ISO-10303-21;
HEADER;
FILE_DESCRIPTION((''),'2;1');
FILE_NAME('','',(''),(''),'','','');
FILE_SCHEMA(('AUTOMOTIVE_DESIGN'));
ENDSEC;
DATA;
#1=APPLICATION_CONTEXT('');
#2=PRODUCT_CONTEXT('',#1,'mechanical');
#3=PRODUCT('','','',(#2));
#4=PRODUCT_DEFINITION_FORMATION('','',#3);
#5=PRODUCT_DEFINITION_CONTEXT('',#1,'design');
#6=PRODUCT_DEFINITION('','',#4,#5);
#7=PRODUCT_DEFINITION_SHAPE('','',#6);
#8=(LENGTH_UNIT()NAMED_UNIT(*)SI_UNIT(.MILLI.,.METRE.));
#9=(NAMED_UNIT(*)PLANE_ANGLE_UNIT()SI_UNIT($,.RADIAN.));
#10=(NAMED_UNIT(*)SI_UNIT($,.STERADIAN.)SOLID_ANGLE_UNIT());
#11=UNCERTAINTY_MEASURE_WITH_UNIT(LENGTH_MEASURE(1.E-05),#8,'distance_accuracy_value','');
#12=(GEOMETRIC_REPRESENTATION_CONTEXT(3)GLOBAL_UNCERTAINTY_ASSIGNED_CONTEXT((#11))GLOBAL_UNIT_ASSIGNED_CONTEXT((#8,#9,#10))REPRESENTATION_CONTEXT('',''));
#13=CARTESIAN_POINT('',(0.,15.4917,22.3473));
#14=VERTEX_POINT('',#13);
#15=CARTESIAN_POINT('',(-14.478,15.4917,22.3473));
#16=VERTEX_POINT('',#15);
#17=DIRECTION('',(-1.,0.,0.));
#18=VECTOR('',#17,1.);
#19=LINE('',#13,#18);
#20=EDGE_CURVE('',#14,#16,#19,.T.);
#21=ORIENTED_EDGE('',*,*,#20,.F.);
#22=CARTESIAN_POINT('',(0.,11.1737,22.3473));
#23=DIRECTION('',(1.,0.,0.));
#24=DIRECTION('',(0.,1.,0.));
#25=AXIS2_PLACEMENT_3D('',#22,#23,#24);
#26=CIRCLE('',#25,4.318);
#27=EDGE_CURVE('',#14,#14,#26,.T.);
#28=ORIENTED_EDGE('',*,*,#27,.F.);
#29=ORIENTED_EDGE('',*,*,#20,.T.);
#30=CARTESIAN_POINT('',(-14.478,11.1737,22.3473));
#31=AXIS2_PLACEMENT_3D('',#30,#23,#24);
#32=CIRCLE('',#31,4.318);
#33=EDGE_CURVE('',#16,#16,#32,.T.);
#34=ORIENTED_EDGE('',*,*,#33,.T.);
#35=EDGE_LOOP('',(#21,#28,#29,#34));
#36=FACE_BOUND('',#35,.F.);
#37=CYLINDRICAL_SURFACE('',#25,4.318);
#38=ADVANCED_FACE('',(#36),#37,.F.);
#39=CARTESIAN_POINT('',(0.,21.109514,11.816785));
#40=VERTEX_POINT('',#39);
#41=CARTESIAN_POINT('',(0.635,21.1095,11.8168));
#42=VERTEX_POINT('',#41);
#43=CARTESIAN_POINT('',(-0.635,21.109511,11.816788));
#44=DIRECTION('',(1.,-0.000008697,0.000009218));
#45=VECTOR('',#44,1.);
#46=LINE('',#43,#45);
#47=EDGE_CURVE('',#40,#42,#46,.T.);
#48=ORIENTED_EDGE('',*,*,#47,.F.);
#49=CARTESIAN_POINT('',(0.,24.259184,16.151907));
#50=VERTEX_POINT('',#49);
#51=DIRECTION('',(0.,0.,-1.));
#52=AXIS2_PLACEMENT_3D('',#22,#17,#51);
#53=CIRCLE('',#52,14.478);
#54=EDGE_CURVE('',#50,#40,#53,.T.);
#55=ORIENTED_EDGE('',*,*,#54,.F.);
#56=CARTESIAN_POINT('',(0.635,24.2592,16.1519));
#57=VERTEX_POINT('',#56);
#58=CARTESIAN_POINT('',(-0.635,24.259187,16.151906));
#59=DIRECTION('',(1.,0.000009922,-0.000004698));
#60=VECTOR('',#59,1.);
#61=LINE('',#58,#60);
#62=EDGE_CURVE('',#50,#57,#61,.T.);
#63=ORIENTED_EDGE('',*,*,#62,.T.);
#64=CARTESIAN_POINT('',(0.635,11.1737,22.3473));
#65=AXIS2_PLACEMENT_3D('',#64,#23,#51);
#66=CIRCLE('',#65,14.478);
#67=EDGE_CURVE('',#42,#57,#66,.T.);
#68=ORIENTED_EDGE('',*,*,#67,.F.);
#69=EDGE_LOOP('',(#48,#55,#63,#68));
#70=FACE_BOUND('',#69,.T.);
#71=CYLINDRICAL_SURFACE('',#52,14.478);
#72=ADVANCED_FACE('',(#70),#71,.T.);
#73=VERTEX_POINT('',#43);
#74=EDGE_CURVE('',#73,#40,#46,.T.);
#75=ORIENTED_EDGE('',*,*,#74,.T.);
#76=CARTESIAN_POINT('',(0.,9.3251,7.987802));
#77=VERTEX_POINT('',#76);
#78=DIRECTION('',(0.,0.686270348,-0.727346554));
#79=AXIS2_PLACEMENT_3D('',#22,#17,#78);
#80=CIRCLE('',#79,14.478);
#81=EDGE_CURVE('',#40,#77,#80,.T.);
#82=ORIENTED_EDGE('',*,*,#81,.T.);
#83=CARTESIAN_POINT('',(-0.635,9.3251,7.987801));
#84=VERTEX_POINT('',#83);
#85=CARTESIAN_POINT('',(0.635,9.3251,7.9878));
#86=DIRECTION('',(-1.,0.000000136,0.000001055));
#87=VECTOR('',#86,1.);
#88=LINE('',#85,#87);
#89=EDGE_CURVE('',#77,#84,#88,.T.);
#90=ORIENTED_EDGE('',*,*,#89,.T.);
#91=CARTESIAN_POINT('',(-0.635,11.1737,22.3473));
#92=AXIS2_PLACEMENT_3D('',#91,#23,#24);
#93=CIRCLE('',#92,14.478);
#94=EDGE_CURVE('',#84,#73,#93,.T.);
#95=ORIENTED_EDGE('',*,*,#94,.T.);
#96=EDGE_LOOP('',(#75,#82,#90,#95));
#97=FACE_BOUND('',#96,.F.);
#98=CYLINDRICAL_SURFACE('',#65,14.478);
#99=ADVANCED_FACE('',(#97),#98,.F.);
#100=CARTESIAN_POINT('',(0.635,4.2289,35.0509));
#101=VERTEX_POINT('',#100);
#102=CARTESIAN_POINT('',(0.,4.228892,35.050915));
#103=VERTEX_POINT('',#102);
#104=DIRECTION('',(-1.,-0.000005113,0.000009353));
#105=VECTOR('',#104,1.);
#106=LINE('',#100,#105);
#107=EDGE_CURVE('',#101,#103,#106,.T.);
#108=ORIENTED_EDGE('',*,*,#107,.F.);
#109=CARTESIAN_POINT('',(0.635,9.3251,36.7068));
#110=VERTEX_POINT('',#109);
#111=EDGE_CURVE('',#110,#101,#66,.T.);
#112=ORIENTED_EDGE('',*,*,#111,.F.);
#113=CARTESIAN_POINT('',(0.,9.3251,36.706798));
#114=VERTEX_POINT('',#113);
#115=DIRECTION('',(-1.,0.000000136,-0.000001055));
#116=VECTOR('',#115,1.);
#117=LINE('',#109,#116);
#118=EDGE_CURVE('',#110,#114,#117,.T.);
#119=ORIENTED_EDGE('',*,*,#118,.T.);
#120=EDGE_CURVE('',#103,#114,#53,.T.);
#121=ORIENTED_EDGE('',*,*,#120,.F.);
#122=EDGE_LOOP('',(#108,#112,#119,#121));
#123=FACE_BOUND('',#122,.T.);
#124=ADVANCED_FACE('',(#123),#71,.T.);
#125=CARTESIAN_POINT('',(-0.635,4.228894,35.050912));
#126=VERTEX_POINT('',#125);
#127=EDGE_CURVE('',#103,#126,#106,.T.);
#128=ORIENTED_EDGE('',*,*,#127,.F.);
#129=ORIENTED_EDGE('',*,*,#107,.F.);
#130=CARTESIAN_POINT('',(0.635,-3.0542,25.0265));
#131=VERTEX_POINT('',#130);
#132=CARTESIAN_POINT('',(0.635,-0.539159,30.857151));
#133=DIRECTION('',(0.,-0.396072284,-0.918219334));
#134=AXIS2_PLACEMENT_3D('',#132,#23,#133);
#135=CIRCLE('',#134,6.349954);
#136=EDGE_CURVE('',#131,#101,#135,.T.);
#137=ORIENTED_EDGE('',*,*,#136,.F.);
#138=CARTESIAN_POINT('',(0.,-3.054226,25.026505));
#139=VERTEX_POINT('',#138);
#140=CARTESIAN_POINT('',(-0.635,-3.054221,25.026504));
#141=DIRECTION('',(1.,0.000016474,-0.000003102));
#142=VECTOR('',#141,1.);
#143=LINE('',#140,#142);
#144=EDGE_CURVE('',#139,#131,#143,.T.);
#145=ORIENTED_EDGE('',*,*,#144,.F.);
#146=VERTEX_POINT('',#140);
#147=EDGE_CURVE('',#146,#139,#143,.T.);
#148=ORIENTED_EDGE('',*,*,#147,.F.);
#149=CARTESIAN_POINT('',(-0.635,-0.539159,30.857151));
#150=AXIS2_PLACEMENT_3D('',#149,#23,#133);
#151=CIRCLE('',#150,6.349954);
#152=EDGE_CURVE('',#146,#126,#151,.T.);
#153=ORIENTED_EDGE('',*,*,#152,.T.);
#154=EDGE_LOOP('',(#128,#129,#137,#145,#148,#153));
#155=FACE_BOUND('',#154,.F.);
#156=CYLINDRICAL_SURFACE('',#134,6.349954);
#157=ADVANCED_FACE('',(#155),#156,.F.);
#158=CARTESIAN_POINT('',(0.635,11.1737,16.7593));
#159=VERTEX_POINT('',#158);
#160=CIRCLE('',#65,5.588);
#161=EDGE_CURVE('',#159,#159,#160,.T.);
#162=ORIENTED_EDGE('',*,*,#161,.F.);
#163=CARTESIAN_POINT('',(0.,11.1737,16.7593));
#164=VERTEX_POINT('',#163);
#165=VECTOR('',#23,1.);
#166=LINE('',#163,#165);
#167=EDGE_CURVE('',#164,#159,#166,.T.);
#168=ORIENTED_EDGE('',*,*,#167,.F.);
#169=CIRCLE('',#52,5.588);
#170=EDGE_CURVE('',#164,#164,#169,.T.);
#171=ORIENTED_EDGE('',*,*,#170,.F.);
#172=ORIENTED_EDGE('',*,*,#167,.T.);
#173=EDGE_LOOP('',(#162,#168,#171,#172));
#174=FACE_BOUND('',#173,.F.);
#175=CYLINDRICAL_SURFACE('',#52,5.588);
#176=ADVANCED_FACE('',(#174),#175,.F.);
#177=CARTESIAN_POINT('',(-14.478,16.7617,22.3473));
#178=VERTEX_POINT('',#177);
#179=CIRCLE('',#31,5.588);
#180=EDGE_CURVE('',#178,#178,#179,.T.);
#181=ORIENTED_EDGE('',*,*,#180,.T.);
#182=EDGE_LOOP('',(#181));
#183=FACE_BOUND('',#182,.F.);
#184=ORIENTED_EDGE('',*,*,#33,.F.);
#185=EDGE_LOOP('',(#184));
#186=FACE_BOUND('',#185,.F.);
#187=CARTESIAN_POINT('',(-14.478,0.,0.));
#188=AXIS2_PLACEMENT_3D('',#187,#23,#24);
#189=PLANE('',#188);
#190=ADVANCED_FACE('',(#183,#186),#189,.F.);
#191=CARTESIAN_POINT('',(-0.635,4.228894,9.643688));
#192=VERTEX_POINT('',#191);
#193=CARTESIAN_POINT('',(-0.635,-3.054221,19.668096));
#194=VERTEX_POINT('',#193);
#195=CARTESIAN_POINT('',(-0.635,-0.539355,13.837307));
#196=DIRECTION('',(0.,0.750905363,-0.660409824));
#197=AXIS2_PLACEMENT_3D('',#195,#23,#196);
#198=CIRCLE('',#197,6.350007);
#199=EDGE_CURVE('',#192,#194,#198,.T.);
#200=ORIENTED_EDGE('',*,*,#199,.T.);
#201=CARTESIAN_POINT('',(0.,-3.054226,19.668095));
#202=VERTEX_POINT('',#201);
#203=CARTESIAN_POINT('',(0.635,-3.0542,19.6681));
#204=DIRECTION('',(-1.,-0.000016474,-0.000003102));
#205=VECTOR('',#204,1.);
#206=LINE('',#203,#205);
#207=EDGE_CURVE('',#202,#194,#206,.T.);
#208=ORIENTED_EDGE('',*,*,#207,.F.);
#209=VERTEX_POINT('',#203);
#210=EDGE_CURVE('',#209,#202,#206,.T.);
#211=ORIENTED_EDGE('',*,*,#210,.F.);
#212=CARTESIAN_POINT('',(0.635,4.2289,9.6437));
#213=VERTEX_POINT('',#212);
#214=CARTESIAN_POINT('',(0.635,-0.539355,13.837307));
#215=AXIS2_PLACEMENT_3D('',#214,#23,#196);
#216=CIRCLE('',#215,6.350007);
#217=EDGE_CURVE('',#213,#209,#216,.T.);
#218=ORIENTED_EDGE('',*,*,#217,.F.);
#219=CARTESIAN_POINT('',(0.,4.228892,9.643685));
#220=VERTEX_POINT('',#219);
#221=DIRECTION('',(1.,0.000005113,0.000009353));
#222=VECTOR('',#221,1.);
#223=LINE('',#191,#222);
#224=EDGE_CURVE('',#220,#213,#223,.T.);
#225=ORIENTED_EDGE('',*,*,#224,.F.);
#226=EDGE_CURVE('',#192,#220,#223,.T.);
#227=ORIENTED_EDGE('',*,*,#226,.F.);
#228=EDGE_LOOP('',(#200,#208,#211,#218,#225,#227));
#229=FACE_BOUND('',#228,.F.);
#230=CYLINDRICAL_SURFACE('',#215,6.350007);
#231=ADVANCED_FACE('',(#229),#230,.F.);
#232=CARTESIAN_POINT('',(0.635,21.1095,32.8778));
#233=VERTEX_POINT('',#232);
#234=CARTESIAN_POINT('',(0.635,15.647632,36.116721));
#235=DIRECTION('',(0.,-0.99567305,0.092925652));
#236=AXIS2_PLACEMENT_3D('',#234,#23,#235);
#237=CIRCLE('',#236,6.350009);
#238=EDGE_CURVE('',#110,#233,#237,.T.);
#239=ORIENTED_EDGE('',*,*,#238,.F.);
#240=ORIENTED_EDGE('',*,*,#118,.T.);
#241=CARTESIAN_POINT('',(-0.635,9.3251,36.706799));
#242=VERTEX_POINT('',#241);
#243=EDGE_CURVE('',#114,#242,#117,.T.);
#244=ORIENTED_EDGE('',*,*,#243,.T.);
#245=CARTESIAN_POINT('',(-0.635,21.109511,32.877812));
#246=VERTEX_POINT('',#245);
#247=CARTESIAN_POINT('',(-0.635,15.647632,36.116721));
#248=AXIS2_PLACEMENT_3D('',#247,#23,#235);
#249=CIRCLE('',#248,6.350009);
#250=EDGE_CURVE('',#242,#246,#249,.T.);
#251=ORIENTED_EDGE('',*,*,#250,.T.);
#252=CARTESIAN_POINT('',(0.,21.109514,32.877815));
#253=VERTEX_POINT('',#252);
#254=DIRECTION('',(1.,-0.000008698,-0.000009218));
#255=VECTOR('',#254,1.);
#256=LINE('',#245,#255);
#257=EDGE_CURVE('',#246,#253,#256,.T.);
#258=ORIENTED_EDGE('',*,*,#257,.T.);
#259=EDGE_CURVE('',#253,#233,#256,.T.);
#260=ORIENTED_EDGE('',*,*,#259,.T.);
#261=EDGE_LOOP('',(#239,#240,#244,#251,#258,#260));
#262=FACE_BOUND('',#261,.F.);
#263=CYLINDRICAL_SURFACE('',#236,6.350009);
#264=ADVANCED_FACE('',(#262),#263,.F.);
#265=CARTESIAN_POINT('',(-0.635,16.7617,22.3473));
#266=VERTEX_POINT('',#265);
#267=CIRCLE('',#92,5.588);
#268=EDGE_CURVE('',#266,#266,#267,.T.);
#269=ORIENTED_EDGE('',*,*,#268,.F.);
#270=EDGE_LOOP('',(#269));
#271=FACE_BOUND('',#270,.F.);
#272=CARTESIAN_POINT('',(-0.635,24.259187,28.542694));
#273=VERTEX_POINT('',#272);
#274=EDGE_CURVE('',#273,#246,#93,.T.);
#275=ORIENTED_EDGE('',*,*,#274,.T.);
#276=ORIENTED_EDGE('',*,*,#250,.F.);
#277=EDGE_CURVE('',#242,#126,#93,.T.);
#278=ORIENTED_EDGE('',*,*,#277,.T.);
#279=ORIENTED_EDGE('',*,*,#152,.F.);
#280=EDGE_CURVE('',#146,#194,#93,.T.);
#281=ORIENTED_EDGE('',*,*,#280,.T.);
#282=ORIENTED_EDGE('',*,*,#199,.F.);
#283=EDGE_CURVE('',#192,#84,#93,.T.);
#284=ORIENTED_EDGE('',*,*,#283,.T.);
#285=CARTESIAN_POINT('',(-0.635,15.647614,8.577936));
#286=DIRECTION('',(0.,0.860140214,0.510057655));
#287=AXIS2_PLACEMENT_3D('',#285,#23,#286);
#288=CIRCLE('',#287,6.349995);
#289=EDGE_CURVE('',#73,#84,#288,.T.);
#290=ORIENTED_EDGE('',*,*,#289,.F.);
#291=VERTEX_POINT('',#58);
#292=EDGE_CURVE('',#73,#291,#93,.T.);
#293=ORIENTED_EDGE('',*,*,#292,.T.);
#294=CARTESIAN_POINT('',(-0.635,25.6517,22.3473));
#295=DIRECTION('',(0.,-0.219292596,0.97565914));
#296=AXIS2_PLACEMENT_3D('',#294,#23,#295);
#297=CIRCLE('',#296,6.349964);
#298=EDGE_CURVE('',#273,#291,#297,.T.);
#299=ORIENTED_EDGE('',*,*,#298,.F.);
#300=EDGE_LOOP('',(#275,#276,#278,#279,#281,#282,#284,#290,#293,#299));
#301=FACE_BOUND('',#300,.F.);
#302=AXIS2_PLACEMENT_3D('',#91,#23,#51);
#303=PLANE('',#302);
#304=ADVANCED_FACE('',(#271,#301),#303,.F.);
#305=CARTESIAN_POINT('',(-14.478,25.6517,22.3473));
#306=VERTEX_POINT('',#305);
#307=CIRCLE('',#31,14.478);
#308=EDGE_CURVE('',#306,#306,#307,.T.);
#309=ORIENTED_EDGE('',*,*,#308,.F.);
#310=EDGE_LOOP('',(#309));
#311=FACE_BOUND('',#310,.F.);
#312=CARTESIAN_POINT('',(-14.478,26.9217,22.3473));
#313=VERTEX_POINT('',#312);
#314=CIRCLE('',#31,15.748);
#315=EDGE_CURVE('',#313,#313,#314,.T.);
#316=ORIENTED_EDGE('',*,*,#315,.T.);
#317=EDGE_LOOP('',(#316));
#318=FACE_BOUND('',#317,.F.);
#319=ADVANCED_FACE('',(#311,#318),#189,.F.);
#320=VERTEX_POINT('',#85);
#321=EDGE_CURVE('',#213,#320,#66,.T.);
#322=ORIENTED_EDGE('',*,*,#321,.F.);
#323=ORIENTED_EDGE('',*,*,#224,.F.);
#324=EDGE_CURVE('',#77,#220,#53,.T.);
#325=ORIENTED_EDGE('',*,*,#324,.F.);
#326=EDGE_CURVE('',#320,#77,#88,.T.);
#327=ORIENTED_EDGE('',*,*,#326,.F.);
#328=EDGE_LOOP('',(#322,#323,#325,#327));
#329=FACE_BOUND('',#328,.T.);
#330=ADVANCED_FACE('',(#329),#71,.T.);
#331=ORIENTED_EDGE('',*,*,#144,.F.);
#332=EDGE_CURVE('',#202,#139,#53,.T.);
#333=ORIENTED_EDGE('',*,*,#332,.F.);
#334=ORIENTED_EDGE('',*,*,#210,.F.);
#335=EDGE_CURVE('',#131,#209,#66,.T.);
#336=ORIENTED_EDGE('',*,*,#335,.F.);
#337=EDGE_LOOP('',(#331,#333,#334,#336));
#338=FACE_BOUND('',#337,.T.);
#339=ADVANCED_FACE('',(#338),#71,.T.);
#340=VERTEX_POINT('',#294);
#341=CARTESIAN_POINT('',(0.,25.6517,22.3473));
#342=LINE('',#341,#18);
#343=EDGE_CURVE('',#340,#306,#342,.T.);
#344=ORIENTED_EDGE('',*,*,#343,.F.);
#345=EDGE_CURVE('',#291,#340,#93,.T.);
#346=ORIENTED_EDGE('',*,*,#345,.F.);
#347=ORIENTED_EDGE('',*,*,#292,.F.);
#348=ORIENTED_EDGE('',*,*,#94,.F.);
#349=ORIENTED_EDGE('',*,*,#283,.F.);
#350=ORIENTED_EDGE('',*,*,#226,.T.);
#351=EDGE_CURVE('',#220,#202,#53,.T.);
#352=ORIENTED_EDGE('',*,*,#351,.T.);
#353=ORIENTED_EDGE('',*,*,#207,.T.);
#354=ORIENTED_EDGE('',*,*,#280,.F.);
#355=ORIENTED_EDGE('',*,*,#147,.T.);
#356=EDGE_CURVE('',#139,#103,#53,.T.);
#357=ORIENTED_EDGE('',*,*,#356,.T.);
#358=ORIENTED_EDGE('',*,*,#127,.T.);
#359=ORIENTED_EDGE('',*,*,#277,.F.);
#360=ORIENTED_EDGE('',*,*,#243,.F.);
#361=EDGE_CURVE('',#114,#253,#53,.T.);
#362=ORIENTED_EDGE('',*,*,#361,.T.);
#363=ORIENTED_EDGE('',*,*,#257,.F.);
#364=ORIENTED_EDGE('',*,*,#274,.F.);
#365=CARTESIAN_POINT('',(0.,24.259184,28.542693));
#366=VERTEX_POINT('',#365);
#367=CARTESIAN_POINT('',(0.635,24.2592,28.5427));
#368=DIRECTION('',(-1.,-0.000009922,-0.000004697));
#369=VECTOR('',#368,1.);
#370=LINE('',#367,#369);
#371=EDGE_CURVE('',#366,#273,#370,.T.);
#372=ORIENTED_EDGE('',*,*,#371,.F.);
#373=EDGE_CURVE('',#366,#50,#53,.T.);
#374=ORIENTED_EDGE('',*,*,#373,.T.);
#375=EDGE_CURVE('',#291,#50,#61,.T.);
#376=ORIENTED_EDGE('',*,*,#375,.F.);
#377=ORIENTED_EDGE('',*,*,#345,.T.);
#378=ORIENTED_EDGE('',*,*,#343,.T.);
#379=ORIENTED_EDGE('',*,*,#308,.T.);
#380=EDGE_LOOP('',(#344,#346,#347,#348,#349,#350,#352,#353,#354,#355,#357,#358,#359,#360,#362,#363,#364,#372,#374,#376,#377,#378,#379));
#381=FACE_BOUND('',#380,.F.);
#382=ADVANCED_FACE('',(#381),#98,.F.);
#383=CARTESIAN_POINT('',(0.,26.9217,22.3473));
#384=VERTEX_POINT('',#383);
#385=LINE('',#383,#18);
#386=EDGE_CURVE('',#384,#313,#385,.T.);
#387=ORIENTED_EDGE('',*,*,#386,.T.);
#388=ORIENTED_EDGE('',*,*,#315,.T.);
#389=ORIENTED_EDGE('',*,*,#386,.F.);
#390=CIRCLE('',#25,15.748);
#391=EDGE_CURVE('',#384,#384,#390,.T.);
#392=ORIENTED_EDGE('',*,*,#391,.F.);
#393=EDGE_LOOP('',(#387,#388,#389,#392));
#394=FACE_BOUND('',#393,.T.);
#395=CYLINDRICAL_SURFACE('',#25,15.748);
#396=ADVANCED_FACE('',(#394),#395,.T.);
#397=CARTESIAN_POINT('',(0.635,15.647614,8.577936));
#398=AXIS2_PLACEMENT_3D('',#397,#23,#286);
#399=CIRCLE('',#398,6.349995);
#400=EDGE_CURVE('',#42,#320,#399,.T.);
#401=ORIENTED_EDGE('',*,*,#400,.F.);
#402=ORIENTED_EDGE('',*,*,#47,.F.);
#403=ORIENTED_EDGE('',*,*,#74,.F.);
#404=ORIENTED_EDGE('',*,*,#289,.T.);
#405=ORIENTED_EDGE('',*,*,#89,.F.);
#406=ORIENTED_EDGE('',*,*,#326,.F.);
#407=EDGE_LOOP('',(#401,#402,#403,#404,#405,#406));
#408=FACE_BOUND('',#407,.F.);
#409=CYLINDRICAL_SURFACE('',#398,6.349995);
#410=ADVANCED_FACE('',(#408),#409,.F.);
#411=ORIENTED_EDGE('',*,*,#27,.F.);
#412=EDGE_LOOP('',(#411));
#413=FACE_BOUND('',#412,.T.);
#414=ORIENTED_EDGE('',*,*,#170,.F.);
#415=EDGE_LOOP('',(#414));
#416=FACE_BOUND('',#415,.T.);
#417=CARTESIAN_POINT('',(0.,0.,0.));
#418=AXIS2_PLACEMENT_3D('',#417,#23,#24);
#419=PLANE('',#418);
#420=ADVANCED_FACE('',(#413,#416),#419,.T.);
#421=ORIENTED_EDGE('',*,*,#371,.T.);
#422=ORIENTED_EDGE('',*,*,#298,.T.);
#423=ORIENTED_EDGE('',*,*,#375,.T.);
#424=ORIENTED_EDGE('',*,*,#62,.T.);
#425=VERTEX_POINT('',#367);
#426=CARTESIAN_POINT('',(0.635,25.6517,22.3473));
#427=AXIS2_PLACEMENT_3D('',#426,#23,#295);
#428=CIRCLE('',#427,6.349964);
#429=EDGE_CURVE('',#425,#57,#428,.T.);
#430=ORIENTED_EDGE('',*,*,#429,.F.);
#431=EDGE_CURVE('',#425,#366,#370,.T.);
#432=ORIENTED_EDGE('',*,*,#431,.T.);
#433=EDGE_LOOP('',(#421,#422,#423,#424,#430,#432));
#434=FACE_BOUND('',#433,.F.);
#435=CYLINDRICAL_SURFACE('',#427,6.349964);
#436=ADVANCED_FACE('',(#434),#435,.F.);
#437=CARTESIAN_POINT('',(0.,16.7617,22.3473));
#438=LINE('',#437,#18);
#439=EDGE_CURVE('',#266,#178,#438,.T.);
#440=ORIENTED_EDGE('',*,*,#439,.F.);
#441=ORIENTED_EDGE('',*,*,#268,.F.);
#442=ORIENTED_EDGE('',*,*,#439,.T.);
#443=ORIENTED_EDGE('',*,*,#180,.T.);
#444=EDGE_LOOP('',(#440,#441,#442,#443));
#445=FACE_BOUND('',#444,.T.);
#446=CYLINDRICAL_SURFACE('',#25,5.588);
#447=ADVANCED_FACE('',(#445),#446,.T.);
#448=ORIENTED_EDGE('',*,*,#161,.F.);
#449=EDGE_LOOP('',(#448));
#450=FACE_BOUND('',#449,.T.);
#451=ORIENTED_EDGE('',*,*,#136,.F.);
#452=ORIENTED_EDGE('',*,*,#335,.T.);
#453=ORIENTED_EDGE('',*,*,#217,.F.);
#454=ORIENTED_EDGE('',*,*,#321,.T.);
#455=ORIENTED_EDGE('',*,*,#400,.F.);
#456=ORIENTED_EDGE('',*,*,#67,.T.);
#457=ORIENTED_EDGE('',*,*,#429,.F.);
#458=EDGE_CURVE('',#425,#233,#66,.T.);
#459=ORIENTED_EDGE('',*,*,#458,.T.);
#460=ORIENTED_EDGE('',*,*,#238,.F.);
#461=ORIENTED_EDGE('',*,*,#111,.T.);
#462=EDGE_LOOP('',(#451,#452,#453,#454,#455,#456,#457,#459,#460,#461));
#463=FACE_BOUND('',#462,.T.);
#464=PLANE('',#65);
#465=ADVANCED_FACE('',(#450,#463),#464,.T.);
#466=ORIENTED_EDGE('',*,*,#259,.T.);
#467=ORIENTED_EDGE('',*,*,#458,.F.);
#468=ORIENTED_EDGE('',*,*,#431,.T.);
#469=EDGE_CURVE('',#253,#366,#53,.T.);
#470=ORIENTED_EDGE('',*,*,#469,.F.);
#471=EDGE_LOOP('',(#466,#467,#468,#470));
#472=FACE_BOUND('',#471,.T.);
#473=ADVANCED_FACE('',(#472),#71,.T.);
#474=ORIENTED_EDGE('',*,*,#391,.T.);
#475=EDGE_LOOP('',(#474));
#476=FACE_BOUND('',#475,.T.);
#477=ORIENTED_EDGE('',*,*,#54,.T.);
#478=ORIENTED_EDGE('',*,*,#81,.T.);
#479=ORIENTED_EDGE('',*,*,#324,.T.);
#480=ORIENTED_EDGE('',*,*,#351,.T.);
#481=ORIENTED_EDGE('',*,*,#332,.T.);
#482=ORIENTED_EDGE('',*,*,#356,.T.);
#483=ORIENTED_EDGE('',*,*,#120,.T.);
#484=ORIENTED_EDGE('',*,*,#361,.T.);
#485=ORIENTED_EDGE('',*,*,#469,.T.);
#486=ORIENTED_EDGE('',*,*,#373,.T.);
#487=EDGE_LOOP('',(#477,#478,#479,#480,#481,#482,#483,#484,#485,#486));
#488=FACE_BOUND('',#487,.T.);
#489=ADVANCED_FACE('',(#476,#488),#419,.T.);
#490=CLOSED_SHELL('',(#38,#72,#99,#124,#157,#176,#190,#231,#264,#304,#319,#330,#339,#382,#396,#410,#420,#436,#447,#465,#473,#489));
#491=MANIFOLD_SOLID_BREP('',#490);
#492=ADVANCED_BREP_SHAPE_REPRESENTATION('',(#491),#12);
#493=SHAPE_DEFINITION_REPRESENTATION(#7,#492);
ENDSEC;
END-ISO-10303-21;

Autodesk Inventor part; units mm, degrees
ref_plane "YZ Plane" through (0, 0, 0) normal (1, 0, 0) x (0, 1, 0)
ref_plane "XZ Plane" through (0, 0, 0) normal (0, 1, 0) x (-1, 0, 0)
ref_plane "XY Plane" through (0, 0, 0) normal (0, 0, 1) x (1, 0, 0)
sketch "Sketch1" plane through (0, 0, 0) normal (1, 0, 0) x (0, 1, 0)
  circle A0 centre (11.1737, 22.3473) radius 5.588
  circle A1 centre (11.1737, 22.3473) radius 4.318
  circle A2 centre (11.1737, 22.3473) radius 14.478
  circle A3 centre (11.1737, 22.3473) radius 15.748
  point P0 (0, 0)
  dimension "d0" = 11.176
  dimension "d1" = 1.27
  dimension "d2" = 1.27
  dimension "d3" = 8.89
extrude "Extrusion1" add sketch "Sketch1" against normal blind 14.478 contours A3
extrude "Extrusion2" add sketch "Sketch1" against normal blind 14.478 contours A0
sketch "Sketch2" plane through (0, 11.1737, 22.3473) normal (1, 0, 0) x (0, 0, -1)
  circle A0 centre (0, 0) radius 14.478 projected
  circle A1 centre (0, 0) radius 15.748 projected
  circle A2 centre (0, 0) radius 5.588 projected
  circle A3 centre (0, 0) radius 4.318 projected
  point P0 (22.3473, -11.1737)
extrude "Extrusion3" add sketch "Sketch2" along normal mid plane 1.27 contours A0
sketch "Sketch3" plane through (0.635, 11.1737, 22.3473) normal (1, 0, 0) x (0, 0, -1)
  circle A0 centre (0, 0) radius 14.478 projected
  arc A1 (-6.1954, 13.0855) -> (6.1954, 13.0855) centre (0, 14.478) ccw
  arc A2 (6.1954, 13.0855) -> (-6.1954, 13.0855) centre (0, 0) ccw
  arc A3 (-14.3595, -1.8486) -> (-10.5305, 9.9358) centre (-13.7694, 4.4739) ccw
  arc A4 (-10.5305, 9.9358) -> (-14.3595, -1.8486) centre (0, 0) ccw
  arc A5 (-2.6792, -14.2279) -> (-12.7036, -6.9448) centre (-8.51, -11.7129) ccw
  arc A6 (-12.7036, -6.9448) -> (-2.6792, -14.2279) centre (0, 0) ccw
  arc A7 (12.7036, -6.9448) -> (2.6792, -14.2279) centre (8.51, -11.7129) ccw
  arc A8 (2.6792, -14.2279) -> (12.7036, -6.9448) centre (0, 0) ccw
  arc A9 (10.5305, 9.9358) -> (14.3595, -1.8486) centre (13.7694, 4.4739) ccw
  arc A10 (14.3595, -1.8486) -> (10.5305, 9.9358) centre (0, 0) ccw
  point P0 (22.3473, -11.1737)
  dimension "d10" = 12.7
  dimension "d13" = 360
extrude "Extrusion4" cut sketch "Sketch3" against normal up to next contours A0 A9 | A1 A0 | A0 A7 | A3 A0 | A0 A5
properties part number "wheal"
